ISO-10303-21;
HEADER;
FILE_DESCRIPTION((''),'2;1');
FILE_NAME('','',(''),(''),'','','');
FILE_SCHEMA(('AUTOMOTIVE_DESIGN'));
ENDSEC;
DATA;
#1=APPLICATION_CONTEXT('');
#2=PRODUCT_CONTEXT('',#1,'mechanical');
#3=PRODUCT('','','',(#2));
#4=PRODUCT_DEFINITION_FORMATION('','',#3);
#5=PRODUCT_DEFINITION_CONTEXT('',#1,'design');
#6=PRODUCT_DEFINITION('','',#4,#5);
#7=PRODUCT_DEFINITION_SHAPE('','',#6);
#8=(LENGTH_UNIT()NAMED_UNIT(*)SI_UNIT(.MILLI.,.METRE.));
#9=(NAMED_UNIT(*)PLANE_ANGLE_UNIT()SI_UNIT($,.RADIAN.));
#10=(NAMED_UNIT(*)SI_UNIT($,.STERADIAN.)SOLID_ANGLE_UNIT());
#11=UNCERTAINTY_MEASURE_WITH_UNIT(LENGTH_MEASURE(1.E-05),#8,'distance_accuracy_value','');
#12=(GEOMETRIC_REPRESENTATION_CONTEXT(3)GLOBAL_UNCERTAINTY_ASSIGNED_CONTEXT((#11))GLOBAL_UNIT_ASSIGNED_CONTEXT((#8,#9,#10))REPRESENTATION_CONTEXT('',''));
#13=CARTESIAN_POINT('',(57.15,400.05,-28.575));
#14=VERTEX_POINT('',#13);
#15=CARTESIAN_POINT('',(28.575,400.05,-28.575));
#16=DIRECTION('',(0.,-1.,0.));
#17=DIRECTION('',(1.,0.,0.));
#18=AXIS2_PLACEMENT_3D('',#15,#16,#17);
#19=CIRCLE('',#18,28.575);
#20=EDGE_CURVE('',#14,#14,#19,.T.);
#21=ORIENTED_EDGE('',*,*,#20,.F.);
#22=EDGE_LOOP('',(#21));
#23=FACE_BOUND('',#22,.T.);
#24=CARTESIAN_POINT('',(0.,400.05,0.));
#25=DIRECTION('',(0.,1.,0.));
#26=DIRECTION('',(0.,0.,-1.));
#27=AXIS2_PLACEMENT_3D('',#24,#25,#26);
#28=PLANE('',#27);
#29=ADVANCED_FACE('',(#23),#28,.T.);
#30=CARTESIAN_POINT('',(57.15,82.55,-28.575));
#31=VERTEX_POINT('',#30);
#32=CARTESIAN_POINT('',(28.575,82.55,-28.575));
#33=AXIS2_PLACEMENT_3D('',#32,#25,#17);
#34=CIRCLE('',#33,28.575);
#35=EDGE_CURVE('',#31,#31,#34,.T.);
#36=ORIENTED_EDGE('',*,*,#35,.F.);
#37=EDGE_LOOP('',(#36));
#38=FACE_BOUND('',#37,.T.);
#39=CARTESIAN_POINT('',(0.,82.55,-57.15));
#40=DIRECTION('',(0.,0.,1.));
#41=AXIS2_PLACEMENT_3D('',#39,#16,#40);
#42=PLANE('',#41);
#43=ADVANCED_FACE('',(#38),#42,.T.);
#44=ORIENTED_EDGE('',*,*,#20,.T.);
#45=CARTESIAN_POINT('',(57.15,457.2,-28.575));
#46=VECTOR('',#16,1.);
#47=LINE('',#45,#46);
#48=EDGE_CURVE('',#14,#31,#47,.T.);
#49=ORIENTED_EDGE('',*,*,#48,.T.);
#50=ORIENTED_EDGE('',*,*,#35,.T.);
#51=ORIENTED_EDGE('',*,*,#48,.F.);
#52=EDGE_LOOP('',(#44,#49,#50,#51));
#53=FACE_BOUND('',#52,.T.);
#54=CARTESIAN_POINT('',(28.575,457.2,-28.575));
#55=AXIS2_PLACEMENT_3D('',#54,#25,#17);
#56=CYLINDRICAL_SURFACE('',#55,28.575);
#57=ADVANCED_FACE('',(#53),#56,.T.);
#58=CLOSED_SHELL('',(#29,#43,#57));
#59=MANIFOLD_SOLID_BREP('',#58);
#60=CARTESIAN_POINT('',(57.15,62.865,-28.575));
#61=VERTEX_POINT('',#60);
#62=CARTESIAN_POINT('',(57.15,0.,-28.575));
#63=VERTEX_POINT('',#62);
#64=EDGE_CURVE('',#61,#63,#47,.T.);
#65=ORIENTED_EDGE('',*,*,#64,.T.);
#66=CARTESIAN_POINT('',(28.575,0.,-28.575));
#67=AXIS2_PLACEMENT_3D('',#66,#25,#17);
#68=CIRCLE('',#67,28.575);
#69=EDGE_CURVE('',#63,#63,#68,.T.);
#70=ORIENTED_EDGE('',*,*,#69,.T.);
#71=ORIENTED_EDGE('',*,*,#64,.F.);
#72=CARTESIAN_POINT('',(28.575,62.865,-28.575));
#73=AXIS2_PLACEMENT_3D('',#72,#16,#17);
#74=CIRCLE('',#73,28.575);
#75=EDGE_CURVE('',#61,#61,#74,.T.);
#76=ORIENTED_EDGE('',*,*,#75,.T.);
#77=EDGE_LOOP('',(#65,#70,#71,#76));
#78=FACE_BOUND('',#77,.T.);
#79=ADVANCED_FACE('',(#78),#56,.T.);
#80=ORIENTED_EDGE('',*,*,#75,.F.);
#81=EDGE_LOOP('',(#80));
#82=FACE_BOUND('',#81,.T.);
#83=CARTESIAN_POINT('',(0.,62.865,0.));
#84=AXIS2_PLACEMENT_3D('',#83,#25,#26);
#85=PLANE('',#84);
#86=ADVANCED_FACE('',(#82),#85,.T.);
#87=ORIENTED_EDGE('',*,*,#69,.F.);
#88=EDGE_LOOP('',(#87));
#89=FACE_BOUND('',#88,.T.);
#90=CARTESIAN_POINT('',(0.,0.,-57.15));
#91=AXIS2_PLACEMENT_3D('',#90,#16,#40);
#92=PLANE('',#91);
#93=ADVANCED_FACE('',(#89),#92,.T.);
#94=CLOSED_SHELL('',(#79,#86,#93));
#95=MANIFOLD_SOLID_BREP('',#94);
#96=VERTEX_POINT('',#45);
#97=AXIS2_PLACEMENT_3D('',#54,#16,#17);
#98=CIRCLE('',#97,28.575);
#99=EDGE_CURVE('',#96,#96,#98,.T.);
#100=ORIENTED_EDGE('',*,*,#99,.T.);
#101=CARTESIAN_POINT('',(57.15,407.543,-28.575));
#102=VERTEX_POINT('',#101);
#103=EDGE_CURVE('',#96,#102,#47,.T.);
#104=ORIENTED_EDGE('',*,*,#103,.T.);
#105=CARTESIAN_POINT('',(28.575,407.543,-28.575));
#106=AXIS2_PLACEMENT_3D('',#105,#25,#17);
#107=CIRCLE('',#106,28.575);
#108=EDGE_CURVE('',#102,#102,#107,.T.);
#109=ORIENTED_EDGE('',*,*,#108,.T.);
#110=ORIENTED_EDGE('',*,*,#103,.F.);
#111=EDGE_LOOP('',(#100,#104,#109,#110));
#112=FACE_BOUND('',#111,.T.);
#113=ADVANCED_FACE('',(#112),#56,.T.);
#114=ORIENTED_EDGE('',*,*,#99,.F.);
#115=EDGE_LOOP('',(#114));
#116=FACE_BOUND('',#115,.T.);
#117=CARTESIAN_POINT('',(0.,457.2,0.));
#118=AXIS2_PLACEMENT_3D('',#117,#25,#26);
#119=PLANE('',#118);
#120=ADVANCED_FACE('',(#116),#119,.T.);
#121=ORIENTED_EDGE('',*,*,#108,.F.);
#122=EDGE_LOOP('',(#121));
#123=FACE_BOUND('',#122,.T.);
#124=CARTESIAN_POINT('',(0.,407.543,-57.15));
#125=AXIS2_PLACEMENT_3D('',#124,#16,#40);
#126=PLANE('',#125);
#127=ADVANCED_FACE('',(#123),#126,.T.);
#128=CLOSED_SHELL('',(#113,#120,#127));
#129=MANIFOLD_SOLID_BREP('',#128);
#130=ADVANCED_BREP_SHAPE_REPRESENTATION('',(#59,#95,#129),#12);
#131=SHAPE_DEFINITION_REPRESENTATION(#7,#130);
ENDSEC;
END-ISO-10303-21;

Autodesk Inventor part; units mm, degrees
ref_plane "YZ Plane" through (0, 0, 0) normal (1, 0, 0) x (0, 1, 0)
ref_plane "XZ Plane" through (0, 0, 0) normal (0, 1, 0) x (-1, 0, 0)
ref_plane "XY Plane" through (0, 0, 0) normal (0, 0, 1) x (1, 0, 0)
sketch "Sketch2" plane through (0, 0, 0) normal (1, 0, 0) x (0, 1, 0)
  line L0 (0, 0) -> (457.2, 0)
  line L1 (457.2, 0) -> (457.2, -57.15)
  line L2 (457.2, -57.15) -> (0, -57.15)
  line L3 (0, -57.15) -> (0, 0)
  line L4 (407.543, 0) -> (400.05, 0)
  line L5 (400.05, 0) -> (400.05, -57.15)
  line L6 (400.05, -57.15) -> (407.543, -57.15)
  line L7 (407.543, -57.15) -> (407.543, 0)
  line L8 (82.55, 0) -> (62.865, 0)
  line L9 (62.865, 0) -> (62.865, -57.15)
  line L10 (62.865, -57.15) -> (82.55, -57.15)
  line L11 (82.55, -57.15) -> (82.55, 0)
  dimension "d3" = 457.2
  dimension "d4" = 57.15
  dimension "d5" = 7.493
  dimension "d6" = 49.657
  dimension "d7" = 19.685
  dimension "d8" = 62.865
extrude "Extrusion2" add sketch "Sketch2" along normal blind 57.15 contours L0 L9 L2 L3 | L0 L5 L2 L11 | L0 L1 L2 L7
sketch "Sketch3" plane through (0, 457.2, 0) normal (0, 1, 0) x (1, 0, 0)
  circle A0 centre (28.575, 28.575) radius 28.575
  line L0 (0, 57.15) -> (0, 0) projected
  line L1 (0, 0) -> (57.15, 0) projected
  line L2 (57.15, 57.15) -> (57.15, 0) projected
  line L3 (0, 57.15) -> (57.15, 57.15) projected
  dimension "d11" = 57.15
  dimension "d12" = 28.575
  dimension "d13" = 28.575
extrude "Extrusion3" cut sketch "Sketch3" against normal blind 457.2 contours L2 L1 A0 | A0 L3 L2 | A0 L0 L3 | L1 L0 A0
properties part number "RollerFull"
